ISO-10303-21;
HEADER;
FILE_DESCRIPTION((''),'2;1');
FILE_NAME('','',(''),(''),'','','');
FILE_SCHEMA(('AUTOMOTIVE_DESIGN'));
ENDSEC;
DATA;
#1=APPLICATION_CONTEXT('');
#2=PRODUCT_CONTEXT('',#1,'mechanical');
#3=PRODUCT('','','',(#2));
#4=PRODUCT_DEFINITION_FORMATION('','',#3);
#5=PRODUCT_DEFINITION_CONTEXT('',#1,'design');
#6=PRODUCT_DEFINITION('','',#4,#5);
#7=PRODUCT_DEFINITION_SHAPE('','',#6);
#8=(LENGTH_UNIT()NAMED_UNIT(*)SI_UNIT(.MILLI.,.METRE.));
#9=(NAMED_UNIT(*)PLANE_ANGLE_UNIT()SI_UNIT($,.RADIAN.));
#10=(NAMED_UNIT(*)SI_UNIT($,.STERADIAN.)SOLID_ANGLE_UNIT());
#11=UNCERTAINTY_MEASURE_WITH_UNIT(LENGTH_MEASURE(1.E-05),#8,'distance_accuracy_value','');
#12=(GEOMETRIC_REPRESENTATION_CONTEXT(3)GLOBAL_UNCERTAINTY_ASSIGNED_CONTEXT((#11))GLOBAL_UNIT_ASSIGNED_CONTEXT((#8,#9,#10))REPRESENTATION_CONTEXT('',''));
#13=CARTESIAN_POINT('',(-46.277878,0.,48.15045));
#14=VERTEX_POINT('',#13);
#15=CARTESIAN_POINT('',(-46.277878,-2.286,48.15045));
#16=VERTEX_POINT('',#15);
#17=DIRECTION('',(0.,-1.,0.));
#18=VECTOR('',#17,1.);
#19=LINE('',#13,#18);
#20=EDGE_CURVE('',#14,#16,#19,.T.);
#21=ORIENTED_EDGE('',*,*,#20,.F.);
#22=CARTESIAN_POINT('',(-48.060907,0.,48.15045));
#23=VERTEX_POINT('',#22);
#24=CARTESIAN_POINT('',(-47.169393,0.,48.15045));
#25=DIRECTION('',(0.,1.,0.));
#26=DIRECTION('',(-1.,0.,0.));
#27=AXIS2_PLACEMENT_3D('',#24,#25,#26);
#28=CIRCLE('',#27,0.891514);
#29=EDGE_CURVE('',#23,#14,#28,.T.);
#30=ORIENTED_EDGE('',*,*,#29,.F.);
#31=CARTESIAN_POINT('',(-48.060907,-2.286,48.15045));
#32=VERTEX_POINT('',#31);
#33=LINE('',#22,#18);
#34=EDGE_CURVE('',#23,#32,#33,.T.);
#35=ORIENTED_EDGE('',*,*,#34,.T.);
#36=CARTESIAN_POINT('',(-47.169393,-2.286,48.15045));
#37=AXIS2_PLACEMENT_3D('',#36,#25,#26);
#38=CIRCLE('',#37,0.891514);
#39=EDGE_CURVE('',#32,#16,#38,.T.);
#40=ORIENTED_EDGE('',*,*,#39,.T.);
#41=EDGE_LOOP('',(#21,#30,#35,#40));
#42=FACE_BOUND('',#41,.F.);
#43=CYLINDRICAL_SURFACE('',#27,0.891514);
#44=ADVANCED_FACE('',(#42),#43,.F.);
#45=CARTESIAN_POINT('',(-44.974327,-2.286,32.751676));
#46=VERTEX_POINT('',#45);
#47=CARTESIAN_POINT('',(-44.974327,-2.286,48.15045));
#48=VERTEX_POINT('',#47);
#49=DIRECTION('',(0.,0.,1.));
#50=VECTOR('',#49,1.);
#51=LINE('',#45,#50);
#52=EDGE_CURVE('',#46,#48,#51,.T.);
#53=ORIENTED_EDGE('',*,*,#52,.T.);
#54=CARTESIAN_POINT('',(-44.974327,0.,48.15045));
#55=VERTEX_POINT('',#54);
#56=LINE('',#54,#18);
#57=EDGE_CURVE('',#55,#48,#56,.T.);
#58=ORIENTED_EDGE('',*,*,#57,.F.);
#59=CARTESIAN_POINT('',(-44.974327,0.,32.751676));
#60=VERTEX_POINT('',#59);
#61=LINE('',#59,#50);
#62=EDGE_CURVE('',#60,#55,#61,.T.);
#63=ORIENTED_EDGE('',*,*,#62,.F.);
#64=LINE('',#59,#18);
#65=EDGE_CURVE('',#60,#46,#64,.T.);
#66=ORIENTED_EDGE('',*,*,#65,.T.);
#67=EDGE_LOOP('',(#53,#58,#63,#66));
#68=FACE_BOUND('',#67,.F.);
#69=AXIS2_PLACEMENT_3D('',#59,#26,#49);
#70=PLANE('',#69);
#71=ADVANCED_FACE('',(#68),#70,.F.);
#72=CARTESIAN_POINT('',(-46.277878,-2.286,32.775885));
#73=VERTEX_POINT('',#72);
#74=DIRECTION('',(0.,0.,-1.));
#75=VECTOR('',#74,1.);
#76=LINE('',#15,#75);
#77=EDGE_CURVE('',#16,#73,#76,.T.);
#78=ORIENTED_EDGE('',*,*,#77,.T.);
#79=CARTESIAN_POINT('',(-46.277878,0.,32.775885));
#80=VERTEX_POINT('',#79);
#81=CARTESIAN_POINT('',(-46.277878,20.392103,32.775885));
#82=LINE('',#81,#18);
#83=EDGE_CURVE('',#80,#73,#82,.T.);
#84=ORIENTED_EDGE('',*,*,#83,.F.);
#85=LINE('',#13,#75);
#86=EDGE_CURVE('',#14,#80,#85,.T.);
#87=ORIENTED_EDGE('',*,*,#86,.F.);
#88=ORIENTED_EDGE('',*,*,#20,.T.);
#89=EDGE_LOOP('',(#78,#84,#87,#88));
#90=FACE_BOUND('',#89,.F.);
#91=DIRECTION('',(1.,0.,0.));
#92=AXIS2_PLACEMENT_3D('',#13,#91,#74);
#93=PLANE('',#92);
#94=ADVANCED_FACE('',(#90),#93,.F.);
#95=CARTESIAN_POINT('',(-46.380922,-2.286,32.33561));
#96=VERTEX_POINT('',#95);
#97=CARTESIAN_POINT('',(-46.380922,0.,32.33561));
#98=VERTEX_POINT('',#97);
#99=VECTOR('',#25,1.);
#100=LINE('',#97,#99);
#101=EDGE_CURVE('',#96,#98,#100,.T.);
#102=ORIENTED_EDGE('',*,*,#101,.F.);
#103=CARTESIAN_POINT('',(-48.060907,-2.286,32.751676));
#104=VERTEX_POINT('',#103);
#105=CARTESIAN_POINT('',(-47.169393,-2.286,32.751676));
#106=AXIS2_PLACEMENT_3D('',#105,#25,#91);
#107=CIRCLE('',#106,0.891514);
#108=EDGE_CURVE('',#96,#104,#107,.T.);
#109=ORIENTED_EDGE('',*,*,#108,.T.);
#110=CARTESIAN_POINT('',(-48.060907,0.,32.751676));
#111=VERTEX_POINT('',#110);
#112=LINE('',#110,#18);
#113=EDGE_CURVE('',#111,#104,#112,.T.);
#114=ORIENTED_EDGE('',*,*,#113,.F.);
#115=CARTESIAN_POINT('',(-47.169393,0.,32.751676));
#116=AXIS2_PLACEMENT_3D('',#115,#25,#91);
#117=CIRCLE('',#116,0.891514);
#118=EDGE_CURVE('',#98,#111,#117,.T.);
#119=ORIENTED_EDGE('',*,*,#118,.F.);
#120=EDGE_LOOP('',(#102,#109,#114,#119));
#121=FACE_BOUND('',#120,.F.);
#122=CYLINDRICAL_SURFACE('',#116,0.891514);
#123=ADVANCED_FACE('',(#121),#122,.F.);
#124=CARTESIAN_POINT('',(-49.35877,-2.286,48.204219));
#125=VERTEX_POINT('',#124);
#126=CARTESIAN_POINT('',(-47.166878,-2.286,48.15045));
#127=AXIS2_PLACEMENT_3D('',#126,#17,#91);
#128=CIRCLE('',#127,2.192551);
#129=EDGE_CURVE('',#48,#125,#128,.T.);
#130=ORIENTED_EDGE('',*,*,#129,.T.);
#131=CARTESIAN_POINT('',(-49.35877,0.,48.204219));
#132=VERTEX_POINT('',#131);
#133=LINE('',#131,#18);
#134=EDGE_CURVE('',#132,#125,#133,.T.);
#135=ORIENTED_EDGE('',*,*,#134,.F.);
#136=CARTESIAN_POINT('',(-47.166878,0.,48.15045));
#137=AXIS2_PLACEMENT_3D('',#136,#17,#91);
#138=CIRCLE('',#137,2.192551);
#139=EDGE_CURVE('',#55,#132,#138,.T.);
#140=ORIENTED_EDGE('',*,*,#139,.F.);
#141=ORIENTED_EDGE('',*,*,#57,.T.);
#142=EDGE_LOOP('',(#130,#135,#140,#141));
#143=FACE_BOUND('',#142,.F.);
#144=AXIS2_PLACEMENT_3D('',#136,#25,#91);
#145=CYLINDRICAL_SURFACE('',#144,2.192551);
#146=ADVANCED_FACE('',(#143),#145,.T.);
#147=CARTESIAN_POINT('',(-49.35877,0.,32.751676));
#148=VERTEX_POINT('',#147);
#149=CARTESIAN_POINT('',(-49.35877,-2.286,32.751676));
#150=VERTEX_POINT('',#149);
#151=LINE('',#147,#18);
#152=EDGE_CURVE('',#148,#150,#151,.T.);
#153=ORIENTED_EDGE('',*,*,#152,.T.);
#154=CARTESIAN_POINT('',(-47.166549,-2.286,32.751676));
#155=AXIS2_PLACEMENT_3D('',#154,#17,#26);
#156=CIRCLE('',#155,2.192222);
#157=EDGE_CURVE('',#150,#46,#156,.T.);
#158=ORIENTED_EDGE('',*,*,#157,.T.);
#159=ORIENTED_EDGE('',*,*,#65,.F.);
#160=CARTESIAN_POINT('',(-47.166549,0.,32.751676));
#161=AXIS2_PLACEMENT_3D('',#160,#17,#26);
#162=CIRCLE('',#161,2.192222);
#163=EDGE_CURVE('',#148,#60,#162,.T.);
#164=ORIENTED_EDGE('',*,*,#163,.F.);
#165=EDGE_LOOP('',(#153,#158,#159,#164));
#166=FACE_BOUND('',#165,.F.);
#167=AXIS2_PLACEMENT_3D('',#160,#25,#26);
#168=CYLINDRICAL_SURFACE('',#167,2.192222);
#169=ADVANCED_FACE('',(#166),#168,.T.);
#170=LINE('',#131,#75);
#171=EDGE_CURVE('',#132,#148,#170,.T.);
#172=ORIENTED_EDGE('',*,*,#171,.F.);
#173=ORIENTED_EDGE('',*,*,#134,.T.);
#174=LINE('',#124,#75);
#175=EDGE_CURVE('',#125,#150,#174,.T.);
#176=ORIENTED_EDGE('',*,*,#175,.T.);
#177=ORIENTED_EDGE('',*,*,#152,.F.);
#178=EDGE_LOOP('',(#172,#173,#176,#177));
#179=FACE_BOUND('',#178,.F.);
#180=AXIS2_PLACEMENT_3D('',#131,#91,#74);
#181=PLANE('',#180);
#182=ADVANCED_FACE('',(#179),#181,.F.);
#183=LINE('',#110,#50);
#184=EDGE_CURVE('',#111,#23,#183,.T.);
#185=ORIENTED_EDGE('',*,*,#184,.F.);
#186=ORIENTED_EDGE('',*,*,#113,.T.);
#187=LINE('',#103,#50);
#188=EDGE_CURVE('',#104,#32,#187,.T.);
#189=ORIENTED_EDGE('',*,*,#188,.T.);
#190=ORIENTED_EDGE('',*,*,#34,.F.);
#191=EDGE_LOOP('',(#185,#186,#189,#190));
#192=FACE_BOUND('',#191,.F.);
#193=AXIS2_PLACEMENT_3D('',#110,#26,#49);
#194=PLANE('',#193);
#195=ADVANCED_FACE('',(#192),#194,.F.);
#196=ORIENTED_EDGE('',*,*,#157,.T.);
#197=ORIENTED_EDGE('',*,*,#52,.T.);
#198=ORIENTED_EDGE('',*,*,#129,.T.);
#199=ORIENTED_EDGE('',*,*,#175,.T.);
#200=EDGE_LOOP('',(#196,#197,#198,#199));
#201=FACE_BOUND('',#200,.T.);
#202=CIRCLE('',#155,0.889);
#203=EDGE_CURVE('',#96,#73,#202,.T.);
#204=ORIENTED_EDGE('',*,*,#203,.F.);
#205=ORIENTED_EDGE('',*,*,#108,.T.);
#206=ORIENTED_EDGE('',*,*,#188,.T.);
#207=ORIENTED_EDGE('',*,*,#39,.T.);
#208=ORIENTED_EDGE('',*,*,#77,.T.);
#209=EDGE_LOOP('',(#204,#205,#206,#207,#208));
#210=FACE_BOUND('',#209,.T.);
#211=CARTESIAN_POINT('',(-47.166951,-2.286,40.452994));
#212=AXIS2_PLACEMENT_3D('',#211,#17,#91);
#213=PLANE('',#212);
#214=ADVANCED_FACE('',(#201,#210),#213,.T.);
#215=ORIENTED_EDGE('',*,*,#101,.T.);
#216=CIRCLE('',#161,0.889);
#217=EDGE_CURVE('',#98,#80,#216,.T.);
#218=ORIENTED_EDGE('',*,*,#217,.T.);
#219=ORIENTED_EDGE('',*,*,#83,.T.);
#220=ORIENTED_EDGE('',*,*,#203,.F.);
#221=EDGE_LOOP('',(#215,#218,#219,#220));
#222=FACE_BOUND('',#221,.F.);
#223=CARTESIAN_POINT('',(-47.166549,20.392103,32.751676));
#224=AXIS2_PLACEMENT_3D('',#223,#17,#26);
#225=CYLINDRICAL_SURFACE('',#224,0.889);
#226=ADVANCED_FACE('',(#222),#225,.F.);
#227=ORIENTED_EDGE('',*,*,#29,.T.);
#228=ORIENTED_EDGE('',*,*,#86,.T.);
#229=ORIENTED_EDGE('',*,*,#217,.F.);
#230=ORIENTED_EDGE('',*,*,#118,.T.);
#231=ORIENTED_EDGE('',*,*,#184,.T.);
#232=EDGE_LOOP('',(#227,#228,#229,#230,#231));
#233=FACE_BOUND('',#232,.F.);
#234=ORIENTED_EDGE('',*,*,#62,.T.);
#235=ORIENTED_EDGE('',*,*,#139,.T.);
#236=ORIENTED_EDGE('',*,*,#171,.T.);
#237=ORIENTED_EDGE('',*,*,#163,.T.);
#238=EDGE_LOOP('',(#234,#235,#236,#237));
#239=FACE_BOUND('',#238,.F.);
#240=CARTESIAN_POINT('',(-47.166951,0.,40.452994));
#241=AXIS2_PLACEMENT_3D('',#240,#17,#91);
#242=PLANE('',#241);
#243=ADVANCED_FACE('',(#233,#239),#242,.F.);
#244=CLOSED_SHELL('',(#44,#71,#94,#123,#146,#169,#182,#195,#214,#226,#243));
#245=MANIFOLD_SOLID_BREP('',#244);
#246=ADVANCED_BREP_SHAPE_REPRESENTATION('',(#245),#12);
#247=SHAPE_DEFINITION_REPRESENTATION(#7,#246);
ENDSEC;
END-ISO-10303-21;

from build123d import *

# Parameters (mm, degrees)
F1_DEPTH = 2.286
F2_D     = 1.778


with BuildPart() as f1:
    # F0 (on Front) → F1 (new body)
    with BuildSketch(Plane.XZ):
        with BuildLine():
            ThreePointArc((-44.9743270874, 48.1504499912), (-47.139991973, 50.3428364156), (-49.3587702513, 48.2042187354))
            Line((-49.3587702513, 48.2042187354), (-49.3587702513, 32.7516756952))
            ThreePointArc((-49.3587702513, 32.7516756952), (-47.1665486693, 30.5594541132), (-44.9743270874, 32.7516756952))
            Line((-44.9743270874, 32.7516756952), (-44.9743270874, 48.1504499912))
        make_face()
        with BuildLine():
            ThreePointArc((-48.060906813, 48.1504499912), (-47.1693925898, 49.0419642144), (-46.2778783666, 48.1504499912))
            Line((-46.2778783666, 48.1504499912), (-46.2778783666, 32.7516756952))
            ThreePointArc((-46.2778783666, 32.7516756952), (-47.1693925898, 31.860161472), (-48.060906813, 32.7516756952))
            Line((-48.060906813, 32.7516756952), (-48.060906813, 48.1504499912))
        make_face(mode=Mode.SUBTRACT)
    extrude(amount=F1_DEPTH)

    # F2 (through all)
    with Locations(Plane(origin=(0, 0, 0), x_dir=(1, 0, 0), z_dir=(0, 1, 0))):
        with Locations((-47.1668783666, -48.1504499912), (-47.1665486693, -32.7516756952)):
            Hole(F2_D / 2)


solid = f1.part
